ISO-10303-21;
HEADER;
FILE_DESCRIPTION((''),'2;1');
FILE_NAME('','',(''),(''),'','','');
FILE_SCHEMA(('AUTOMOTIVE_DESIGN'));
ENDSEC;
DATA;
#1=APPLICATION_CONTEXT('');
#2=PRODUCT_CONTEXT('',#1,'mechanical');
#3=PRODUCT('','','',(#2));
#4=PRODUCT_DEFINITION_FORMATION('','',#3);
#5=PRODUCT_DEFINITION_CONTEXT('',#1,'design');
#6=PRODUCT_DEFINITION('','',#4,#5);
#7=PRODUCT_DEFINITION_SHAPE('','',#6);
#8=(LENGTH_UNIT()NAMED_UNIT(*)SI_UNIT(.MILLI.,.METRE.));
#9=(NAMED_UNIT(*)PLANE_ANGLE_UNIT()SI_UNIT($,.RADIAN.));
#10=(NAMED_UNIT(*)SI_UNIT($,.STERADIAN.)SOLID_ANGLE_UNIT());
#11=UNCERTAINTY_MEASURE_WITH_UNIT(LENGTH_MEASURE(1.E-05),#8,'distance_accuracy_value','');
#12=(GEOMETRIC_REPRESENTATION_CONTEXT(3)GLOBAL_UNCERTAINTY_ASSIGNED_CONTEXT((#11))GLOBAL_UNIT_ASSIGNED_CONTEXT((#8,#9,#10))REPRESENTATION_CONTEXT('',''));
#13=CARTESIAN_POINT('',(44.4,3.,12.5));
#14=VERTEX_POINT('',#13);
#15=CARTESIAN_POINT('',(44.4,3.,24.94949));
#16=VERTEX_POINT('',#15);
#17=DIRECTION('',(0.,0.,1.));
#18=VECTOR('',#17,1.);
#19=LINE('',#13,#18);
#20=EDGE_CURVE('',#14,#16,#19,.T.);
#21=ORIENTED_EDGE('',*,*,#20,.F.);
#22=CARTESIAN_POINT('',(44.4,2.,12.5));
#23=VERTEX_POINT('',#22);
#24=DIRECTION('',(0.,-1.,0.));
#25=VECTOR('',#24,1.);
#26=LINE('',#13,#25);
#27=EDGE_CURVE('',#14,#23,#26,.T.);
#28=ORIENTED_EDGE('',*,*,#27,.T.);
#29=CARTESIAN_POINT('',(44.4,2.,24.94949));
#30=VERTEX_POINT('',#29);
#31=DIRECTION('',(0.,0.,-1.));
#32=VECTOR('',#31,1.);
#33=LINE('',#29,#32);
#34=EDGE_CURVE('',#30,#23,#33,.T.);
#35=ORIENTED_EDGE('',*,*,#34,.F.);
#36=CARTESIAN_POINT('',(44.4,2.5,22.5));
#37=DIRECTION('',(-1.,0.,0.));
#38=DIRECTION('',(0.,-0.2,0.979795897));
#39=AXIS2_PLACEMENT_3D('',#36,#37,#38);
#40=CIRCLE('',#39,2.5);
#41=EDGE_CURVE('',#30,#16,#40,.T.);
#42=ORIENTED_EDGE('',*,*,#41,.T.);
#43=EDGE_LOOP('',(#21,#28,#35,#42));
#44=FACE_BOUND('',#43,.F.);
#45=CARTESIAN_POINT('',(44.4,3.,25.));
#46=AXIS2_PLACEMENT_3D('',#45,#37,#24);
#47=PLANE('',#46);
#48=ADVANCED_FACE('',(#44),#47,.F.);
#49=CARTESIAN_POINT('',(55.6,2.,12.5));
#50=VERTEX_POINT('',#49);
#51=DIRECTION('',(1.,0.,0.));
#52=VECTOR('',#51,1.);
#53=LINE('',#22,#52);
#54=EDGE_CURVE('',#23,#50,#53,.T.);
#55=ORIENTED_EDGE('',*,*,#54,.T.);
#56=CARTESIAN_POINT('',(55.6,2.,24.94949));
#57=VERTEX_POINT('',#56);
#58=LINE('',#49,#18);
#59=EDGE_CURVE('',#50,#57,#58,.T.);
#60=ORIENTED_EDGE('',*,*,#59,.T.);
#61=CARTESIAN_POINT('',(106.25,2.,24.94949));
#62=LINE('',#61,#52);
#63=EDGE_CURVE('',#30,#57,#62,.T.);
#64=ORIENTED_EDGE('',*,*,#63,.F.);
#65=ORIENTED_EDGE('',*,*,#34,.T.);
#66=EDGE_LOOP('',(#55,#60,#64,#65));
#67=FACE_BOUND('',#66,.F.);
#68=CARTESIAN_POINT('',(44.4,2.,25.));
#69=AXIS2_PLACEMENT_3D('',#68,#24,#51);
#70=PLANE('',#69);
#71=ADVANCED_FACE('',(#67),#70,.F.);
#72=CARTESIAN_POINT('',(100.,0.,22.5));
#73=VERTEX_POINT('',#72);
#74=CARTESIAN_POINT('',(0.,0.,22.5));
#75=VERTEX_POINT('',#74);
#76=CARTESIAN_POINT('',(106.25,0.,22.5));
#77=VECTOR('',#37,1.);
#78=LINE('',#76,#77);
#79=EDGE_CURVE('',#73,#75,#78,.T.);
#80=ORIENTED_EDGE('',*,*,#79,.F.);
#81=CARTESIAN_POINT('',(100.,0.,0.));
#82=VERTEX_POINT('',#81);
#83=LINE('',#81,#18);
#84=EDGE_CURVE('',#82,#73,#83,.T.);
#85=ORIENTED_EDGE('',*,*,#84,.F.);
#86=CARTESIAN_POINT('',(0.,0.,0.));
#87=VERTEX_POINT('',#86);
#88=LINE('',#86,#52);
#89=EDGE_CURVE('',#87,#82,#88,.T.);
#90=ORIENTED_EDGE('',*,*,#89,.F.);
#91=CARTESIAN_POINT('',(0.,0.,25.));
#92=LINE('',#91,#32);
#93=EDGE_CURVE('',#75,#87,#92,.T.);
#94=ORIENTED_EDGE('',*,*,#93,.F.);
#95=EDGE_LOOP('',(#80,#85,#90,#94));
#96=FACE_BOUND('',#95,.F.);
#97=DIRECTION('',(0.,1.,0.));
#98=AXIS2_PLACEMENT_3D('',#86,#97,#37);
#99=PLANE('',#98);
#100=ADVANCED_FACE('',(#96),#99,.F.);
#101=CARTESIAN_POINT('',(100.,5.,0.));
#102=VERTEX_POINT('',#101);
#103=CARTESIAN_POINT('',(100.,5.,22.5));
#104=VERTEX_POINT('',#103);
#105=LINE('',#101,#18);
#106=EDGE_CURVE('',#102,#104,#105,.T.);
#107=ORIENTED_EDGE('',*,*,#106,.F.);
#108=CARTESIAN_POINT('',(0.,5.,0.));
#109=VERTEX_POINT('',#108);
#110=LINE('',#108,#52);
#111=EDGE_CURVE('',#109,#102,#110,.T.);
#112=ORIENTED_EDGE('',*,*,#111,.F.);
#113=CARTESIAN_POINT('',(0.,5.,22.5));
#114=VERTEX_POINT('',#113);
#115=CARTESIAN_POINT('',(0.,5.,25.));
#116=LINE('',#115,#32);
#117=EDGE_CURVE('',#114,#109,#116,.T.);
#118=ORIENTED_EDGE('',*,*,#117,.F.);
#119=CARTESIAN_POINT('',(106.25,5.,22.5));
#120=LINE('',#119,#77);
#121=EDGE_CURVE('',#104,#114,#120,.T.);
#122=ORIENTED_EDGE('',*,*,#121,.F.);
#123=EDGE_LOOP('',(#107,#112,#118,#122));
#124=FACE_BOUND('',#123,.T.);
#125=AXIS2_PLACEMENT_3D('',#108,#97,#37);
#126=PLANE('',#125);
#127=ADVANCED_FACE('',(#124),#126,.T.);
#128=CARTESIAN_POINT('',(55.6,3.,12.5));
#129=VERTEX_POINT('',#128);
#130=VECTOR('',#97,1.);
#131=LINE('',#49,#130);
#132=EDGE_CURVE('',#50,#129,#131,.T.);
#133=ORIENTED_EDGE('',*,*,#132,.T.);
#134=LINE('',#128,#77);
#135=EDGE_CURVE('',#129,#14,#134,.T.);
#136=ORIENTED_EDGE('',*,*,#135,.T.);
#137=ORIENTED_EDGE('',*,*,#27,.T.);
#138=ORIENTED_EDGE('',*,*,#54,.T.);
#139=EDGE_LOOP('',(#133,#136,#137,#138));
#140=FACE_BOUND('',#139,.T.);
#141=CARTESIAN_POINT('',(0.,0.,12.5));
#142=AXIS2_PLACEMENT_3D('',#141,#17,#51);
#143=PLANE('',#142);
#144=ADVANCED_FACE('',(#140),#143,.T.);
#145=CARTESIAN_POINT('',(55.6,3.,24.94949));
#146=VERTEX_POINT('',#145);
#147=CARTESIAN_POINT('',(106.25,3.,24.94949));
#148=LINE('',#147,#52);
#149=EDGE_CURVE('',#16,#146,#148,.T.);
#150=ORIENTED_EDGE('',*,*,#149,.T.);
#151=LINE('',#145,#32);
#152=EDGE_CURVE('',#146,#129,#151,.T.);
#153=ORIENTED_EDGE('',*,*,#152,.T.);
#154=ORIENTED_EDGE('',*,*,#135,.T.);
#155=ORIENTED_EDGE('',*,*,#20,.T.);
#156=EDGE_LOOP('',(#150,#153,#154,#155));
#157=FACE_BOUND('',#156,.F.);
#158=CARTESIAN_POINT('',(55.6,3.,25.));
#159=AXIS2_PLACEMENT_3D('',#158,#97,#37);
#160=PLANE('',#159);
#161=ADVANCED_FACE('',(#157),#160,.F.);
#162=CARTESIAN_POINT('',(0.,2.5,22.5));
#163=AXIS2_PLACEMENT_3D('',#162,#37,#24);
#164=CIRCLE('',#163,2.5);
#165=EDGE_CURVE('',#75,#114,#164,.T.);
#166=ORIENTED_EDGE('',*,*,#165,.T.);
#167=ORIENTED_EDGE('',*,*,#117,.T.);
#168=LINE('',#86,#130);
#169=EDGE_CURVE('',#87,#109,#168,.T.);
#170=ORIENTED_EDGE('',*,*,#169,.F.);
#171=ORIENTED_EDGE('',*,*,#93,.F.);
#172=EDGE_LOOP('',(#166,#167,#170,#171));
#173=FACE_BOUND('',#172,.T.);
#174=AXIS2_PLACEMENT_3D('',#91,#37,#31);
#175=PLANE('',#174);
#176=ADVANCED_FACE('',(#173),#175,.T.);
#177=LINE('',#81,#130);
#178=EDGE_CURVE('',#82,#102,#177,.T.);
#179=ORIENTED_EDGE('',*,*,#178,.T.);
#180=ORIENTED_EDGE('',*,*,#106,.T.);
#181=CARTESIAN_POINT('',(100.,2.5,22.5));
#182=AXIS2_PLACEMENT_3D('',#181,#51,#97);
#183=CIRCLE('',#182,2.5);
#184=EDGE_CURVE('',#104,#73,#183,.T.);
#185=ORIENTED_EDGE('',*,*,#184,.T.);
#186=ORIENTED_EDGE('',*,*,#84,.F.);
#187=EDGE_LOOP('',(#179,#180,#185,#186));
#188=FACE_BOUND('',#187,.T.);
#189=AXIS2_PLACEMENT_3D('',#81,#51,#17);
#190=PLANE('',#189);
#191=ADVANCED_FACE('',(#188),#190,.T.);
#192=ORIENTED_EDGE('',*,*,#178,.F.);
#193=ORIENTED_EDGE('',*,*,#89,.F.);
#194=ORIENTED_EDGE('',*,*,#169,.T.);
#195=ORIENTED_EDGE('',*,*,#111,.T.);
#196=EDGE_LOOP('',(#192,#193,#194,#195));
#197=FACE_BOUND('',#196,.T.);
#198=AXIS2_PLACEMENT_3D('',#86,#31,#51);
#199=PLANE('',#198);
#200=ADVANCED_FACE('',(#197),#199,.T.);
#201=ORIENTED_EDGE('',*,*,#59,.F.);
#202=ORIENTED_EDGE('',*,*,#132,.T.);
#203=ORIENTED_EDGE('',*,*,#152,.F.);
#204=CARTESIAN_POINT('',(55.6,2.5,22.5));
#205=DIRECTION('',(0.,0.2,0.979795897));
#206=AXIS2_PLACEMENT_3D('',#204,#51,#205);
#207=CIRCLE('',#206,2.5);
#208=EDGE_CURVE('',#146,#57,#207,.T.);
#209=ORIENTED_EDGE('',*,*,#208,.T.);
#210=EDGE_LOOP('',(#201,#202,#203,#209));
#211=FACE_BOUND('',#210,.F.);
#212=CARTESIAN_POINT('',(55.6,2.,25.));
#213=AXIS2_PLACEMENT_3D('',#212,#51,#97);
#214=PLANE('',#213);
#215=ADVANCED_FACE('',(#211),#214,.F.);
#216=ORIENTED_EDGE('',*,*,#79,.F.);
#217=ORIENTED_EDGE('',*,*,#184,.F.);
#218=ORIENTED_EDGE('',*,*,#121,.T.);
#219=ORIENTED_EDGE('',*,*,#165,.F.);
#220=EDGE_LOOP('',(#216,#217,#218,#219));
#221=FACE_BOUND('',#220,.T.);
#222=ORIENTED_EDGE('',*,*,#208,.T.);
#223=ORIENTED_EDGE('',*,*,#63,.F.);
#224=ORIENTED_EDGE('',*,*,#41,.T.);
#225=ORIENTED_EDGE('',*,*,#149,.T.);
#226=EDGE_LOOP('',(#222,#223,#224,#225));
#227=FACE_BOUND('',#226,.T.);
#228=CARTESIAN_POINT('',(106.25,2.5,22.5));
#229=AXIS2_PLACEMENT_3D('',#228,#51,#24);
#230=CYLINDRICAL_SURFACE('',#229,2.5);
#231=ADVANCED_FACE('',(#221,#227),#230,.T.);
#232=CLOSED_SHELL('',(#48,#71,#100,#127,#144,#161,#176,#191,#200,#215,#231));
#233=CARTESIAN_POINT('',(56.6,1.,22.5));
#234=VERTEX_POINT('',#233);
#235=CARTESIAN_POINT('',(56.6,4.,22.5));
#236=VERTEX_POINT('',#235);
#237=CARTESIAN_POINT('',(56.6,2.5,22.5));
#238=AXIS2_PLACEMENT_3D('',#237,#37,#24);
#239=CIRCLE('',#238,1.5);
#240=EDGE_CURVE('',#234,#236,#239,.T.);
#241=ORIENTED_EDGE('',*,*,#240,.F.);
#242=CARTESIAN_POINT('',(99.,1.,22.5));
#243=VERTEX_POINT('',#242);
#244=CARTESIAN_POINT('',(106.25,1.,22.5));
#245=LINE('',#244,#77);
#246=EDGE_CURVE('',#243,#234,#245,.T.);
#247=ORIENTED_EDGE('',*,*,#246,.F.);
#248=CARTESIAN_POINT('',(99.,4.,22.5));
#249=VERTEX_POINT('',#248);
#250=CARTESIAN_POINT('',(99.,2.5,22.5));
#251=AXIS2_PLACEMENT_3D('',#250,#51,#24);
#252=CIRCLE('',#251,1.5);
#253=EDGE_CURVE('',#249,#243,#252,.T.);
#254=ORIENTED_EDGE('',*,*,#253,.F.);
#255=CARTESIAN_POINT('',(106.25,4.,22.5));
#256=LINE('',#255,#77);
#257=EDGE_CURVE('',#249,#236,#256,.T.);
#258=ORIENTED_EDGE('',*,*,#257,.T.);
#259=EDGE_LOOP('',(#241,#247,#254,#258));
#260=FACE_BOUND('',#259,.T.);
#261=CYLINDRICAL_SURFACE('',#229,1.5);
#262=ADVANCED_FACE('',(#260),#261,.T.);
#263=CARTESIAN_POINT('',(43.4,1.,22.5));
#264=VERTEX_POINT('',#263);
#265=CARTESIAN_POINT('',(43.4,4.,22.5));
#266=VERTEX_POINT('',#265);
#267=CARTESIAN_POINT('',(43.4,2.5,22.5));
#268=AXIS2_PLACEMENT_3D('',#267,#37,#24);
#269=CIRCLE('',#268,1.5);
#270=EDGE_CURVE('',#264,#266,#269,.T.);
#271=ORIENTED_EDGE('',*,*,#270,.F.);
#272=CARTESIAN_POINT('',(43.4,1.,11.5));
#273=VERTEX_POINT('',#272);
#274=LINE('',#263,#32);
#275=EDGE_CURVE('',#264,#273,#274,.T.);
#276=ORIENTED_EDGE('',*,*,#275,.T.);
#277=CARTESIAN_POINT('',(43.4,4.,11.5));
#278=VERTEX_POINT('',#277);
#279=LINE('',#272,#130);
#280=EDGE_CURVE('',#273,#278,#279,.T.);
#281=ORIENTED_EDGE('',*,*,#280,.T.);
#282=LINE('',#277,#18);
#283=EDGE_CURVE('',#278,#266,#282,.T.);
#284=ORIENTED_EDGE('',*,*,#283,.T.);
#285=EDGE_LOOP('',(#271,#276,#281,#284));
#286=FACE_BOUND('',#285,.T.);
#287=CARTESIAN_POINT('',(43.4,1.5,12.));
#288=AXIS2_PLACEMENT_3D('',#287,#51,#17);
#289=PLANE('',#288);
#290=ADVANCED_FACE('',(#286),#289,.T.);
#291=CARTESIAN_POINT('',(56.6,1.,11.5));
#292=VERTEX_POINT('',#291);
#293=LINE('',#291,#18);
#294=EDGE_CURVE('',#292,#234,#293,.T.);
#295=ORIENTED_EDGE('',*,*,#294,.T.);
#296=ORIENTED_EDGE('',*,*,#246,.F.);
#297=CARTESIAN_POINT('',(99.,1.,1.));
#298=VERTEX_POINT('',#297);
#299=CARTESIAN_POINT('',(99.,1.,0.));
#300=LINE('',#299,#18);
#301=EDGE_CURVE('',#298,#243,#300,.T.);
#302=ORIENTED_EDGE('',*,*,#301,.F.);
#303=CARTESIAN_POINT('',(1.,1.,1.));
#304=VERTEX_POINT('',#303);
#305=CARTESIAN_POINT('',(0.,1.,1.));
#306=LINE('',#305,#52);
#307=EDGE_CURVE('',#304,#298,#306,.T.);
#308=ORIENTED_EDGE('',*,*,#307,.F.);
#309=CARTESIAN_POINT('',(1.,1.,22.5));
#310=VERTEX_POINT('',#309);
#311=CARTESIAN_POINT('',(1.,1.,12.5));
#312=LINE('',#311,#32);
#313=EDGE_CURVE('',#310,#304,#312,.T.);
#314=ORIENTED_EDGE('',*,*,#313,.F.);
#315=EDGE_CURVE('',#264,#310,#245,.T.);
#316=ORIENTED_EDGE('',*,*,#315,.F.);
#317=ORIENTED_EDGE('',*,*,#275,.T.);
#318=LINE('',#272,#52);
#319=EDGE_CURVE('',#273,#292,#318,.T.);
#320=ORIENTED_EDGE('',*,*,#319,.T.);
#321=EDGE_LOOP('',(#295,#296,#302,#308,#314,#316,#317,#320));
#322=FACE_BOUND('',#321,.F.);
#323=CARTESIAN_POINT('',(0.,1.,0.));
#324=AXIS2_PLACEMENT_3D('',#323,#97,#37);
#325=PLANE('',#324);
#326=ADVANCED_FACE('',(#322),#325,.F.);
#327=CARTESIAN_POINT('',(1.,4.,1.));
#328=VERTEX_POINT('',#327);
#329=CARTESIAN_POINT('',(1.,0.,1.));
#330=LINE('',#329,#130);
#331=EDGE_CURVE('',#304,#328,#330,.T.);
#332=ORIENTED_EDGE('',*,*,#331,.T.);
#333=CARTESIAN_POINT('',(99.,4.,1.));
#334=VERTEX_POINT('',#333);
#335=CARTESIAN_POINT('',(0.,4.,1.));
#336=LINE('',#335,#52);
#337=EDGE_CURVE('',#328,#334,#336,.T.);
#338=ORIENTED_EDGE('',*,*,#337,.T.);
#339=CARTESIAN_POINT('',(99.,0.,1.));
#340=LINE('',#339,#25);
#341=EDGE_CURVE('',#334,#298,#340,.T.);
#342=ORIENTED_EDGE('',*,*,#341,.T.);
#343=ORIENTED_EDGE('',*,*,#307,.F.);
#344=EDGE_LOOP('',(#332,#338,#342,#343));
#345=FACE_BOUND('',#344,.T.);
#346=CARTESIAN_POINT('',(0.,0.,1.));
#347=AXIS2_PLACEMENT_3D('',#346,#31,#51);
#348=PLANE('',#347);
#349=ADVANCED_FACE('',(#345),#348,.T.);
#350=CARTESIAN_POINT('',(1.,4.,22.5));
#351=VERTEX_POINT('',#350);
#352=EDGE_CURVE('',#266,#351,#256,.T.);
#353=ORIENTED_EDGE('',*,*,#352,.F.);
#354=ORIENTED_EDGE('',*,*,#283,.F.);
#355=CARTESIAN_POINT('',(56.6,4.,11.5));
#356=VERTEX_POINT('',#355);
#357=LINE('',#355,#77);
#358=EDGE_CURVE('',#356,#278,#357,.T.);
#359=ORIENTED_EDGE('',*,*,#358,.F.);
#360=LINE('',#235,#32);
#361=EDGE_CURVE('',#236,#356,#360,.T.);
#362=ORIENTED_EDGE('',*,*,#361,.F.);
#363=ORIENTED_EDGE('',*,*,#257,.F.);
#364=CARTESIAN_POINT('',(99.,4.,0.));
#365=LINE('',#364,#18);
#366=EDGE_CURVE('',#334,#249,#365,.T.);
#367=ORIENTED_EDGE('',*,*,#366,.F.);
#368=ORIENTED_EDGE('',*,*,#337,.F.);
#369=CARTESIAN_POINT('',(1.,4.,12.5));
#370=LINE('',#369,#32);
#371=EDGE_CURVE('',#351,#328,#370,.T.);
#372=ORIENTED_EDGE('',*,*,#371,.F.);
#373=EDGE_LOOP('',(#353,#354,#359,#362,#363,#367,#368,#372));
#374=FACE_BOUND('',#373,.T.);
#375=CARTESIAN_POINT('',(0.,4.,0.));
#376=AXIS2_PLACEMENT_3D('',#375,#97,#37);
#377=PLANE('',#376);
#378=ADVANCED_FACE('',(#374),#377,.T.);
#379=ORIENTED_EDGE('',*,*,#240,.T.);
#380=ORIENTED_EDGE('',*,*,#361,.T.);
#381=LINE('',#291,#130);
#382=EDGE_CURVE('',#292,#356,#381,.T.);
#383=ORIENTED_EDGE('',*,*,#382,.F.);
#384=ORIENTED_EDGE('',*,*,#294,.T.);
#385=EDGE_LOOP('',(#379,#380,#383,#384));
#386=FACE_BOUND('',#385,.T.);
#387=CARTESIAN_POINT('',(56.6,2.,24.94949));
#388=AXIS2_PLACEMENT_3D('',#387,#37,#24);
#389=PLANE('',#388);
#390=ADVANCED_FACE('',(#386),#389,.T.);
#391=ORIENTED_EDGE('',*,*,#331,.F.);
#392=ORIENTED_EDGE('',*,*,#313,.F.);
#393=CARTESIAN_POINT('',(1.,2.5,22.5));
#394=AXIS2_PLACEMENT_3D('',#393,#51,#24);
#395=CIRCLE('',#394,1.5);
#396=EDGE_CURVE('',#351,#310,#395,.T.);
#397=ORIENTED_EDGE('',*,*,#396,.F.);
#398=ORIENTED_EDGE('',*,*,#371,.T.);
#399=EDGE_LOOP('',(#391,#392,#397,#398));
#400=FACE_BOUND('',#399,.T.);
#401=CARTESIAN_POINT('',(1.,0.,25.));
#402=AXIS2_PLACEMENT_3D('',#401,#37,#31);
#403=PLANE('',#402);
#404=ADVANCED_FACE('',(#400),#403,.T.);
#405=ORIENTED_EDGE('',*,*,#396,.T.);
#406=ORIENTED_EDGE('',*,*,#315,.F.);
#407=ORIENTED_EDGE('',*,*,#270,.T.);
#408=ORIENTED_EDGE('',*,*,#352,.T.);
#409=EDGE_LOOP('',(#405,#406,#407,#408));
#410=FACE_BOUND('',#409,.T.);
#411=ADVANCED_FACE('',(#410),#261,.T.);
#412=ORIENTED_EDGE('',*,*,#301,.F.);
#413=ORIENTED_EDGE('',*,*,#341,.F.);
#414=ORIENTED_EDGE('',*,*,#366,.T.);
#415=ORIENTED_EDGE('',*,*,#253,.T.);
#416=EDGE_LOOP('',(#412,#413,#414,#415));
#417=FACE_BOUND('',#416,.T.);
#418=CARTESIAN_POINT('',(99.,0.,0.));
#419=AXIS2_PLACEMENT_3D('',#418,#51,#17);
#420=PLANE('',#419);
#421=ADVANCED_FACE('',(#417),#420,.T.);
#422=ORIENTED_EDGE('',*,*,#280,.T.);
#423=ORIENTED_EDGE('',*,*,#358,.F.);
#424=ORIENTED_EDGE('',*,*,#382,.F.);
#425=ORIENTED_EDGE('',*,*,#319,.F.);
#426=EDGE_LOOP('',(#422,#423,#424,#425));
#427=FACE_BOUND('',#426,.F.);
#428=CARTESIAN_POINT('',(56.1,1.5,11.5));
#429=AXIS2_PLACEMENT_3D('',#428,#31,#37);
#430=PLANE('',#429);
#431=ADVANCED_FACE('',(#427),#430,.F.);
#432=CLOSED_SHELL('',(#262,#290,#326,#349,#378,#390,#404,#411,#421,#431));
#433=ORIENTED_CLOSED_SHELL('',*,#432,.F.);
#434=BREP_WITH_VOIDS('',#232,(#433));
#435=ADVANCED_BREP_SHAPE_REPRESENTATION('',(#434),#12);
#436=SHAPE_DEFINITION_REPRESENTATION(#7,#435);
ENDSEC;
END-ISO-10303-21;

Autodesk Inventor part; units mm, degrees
ref_plane "YZ Plane" through (0, 0, 0) normal (1, 0, 0) x (0, 1, 0)
ref_plane "XZ Plane" through (0, 0, 0) normal (0, 1, 0) x (-1, 0, 0)
ref_plane "XY Plane" through (0, 0, 0) normal (0, 0, 1) x (1, 0, 0)
sketch "Sketch2" plane through (0, 0, 0) normal (0, 1, 0) x (-1, 0, 0)
  line L0 (0, 0) -> (-100, 0)
  line L1 (-100, 0) -> (-100, 25)
  line L2 (-100, 25) -> (0, 25)
  line L3 (0, 25) -> (0, 0)
  dimension "d10" = 100
  dimension "d11" = 25
extrude "Extrusion2" add sketch "Sketch2" along normal blind 5
sketch "Sketch3" plane through (0, 0, 25) normal (0, 0, 1) x (1, 0, 0)
  line L0 (0, 0) -> (100, 0) construction
  line L1 (0, 0) -> (44.4, 0) construction
  line L2 (44.4, 0) -> (44.4, 2) construction
  line L3 (44.4, 2) -> (0, 2) construction
  line L4 (0, 2) -> (0, 0) construction
  line L5 (44.4, 2) -> (55.6, 2)
  line L6 (55.6, 2) -> (55.6, 3)
  line L7 (55.6, 3) -> (44.4, 3)
  line L8 (44.4, 3) -> (44.4, 2)
  dimension "d14" = 44.4
  dimension "d15" = 2
  dimension "d16" = 11.2
  dimension "d17" = 1
extrude "Extrusion3" cut sketch "Sketch3" against normal blind 12.5
fillet "Fillet2" radius 2.5 2 edges at (50, 5, 25) (50, 0, 25)
shell "Shell1" thickness 1 removed faces 0
properties part number "RCPlaneElevator"
